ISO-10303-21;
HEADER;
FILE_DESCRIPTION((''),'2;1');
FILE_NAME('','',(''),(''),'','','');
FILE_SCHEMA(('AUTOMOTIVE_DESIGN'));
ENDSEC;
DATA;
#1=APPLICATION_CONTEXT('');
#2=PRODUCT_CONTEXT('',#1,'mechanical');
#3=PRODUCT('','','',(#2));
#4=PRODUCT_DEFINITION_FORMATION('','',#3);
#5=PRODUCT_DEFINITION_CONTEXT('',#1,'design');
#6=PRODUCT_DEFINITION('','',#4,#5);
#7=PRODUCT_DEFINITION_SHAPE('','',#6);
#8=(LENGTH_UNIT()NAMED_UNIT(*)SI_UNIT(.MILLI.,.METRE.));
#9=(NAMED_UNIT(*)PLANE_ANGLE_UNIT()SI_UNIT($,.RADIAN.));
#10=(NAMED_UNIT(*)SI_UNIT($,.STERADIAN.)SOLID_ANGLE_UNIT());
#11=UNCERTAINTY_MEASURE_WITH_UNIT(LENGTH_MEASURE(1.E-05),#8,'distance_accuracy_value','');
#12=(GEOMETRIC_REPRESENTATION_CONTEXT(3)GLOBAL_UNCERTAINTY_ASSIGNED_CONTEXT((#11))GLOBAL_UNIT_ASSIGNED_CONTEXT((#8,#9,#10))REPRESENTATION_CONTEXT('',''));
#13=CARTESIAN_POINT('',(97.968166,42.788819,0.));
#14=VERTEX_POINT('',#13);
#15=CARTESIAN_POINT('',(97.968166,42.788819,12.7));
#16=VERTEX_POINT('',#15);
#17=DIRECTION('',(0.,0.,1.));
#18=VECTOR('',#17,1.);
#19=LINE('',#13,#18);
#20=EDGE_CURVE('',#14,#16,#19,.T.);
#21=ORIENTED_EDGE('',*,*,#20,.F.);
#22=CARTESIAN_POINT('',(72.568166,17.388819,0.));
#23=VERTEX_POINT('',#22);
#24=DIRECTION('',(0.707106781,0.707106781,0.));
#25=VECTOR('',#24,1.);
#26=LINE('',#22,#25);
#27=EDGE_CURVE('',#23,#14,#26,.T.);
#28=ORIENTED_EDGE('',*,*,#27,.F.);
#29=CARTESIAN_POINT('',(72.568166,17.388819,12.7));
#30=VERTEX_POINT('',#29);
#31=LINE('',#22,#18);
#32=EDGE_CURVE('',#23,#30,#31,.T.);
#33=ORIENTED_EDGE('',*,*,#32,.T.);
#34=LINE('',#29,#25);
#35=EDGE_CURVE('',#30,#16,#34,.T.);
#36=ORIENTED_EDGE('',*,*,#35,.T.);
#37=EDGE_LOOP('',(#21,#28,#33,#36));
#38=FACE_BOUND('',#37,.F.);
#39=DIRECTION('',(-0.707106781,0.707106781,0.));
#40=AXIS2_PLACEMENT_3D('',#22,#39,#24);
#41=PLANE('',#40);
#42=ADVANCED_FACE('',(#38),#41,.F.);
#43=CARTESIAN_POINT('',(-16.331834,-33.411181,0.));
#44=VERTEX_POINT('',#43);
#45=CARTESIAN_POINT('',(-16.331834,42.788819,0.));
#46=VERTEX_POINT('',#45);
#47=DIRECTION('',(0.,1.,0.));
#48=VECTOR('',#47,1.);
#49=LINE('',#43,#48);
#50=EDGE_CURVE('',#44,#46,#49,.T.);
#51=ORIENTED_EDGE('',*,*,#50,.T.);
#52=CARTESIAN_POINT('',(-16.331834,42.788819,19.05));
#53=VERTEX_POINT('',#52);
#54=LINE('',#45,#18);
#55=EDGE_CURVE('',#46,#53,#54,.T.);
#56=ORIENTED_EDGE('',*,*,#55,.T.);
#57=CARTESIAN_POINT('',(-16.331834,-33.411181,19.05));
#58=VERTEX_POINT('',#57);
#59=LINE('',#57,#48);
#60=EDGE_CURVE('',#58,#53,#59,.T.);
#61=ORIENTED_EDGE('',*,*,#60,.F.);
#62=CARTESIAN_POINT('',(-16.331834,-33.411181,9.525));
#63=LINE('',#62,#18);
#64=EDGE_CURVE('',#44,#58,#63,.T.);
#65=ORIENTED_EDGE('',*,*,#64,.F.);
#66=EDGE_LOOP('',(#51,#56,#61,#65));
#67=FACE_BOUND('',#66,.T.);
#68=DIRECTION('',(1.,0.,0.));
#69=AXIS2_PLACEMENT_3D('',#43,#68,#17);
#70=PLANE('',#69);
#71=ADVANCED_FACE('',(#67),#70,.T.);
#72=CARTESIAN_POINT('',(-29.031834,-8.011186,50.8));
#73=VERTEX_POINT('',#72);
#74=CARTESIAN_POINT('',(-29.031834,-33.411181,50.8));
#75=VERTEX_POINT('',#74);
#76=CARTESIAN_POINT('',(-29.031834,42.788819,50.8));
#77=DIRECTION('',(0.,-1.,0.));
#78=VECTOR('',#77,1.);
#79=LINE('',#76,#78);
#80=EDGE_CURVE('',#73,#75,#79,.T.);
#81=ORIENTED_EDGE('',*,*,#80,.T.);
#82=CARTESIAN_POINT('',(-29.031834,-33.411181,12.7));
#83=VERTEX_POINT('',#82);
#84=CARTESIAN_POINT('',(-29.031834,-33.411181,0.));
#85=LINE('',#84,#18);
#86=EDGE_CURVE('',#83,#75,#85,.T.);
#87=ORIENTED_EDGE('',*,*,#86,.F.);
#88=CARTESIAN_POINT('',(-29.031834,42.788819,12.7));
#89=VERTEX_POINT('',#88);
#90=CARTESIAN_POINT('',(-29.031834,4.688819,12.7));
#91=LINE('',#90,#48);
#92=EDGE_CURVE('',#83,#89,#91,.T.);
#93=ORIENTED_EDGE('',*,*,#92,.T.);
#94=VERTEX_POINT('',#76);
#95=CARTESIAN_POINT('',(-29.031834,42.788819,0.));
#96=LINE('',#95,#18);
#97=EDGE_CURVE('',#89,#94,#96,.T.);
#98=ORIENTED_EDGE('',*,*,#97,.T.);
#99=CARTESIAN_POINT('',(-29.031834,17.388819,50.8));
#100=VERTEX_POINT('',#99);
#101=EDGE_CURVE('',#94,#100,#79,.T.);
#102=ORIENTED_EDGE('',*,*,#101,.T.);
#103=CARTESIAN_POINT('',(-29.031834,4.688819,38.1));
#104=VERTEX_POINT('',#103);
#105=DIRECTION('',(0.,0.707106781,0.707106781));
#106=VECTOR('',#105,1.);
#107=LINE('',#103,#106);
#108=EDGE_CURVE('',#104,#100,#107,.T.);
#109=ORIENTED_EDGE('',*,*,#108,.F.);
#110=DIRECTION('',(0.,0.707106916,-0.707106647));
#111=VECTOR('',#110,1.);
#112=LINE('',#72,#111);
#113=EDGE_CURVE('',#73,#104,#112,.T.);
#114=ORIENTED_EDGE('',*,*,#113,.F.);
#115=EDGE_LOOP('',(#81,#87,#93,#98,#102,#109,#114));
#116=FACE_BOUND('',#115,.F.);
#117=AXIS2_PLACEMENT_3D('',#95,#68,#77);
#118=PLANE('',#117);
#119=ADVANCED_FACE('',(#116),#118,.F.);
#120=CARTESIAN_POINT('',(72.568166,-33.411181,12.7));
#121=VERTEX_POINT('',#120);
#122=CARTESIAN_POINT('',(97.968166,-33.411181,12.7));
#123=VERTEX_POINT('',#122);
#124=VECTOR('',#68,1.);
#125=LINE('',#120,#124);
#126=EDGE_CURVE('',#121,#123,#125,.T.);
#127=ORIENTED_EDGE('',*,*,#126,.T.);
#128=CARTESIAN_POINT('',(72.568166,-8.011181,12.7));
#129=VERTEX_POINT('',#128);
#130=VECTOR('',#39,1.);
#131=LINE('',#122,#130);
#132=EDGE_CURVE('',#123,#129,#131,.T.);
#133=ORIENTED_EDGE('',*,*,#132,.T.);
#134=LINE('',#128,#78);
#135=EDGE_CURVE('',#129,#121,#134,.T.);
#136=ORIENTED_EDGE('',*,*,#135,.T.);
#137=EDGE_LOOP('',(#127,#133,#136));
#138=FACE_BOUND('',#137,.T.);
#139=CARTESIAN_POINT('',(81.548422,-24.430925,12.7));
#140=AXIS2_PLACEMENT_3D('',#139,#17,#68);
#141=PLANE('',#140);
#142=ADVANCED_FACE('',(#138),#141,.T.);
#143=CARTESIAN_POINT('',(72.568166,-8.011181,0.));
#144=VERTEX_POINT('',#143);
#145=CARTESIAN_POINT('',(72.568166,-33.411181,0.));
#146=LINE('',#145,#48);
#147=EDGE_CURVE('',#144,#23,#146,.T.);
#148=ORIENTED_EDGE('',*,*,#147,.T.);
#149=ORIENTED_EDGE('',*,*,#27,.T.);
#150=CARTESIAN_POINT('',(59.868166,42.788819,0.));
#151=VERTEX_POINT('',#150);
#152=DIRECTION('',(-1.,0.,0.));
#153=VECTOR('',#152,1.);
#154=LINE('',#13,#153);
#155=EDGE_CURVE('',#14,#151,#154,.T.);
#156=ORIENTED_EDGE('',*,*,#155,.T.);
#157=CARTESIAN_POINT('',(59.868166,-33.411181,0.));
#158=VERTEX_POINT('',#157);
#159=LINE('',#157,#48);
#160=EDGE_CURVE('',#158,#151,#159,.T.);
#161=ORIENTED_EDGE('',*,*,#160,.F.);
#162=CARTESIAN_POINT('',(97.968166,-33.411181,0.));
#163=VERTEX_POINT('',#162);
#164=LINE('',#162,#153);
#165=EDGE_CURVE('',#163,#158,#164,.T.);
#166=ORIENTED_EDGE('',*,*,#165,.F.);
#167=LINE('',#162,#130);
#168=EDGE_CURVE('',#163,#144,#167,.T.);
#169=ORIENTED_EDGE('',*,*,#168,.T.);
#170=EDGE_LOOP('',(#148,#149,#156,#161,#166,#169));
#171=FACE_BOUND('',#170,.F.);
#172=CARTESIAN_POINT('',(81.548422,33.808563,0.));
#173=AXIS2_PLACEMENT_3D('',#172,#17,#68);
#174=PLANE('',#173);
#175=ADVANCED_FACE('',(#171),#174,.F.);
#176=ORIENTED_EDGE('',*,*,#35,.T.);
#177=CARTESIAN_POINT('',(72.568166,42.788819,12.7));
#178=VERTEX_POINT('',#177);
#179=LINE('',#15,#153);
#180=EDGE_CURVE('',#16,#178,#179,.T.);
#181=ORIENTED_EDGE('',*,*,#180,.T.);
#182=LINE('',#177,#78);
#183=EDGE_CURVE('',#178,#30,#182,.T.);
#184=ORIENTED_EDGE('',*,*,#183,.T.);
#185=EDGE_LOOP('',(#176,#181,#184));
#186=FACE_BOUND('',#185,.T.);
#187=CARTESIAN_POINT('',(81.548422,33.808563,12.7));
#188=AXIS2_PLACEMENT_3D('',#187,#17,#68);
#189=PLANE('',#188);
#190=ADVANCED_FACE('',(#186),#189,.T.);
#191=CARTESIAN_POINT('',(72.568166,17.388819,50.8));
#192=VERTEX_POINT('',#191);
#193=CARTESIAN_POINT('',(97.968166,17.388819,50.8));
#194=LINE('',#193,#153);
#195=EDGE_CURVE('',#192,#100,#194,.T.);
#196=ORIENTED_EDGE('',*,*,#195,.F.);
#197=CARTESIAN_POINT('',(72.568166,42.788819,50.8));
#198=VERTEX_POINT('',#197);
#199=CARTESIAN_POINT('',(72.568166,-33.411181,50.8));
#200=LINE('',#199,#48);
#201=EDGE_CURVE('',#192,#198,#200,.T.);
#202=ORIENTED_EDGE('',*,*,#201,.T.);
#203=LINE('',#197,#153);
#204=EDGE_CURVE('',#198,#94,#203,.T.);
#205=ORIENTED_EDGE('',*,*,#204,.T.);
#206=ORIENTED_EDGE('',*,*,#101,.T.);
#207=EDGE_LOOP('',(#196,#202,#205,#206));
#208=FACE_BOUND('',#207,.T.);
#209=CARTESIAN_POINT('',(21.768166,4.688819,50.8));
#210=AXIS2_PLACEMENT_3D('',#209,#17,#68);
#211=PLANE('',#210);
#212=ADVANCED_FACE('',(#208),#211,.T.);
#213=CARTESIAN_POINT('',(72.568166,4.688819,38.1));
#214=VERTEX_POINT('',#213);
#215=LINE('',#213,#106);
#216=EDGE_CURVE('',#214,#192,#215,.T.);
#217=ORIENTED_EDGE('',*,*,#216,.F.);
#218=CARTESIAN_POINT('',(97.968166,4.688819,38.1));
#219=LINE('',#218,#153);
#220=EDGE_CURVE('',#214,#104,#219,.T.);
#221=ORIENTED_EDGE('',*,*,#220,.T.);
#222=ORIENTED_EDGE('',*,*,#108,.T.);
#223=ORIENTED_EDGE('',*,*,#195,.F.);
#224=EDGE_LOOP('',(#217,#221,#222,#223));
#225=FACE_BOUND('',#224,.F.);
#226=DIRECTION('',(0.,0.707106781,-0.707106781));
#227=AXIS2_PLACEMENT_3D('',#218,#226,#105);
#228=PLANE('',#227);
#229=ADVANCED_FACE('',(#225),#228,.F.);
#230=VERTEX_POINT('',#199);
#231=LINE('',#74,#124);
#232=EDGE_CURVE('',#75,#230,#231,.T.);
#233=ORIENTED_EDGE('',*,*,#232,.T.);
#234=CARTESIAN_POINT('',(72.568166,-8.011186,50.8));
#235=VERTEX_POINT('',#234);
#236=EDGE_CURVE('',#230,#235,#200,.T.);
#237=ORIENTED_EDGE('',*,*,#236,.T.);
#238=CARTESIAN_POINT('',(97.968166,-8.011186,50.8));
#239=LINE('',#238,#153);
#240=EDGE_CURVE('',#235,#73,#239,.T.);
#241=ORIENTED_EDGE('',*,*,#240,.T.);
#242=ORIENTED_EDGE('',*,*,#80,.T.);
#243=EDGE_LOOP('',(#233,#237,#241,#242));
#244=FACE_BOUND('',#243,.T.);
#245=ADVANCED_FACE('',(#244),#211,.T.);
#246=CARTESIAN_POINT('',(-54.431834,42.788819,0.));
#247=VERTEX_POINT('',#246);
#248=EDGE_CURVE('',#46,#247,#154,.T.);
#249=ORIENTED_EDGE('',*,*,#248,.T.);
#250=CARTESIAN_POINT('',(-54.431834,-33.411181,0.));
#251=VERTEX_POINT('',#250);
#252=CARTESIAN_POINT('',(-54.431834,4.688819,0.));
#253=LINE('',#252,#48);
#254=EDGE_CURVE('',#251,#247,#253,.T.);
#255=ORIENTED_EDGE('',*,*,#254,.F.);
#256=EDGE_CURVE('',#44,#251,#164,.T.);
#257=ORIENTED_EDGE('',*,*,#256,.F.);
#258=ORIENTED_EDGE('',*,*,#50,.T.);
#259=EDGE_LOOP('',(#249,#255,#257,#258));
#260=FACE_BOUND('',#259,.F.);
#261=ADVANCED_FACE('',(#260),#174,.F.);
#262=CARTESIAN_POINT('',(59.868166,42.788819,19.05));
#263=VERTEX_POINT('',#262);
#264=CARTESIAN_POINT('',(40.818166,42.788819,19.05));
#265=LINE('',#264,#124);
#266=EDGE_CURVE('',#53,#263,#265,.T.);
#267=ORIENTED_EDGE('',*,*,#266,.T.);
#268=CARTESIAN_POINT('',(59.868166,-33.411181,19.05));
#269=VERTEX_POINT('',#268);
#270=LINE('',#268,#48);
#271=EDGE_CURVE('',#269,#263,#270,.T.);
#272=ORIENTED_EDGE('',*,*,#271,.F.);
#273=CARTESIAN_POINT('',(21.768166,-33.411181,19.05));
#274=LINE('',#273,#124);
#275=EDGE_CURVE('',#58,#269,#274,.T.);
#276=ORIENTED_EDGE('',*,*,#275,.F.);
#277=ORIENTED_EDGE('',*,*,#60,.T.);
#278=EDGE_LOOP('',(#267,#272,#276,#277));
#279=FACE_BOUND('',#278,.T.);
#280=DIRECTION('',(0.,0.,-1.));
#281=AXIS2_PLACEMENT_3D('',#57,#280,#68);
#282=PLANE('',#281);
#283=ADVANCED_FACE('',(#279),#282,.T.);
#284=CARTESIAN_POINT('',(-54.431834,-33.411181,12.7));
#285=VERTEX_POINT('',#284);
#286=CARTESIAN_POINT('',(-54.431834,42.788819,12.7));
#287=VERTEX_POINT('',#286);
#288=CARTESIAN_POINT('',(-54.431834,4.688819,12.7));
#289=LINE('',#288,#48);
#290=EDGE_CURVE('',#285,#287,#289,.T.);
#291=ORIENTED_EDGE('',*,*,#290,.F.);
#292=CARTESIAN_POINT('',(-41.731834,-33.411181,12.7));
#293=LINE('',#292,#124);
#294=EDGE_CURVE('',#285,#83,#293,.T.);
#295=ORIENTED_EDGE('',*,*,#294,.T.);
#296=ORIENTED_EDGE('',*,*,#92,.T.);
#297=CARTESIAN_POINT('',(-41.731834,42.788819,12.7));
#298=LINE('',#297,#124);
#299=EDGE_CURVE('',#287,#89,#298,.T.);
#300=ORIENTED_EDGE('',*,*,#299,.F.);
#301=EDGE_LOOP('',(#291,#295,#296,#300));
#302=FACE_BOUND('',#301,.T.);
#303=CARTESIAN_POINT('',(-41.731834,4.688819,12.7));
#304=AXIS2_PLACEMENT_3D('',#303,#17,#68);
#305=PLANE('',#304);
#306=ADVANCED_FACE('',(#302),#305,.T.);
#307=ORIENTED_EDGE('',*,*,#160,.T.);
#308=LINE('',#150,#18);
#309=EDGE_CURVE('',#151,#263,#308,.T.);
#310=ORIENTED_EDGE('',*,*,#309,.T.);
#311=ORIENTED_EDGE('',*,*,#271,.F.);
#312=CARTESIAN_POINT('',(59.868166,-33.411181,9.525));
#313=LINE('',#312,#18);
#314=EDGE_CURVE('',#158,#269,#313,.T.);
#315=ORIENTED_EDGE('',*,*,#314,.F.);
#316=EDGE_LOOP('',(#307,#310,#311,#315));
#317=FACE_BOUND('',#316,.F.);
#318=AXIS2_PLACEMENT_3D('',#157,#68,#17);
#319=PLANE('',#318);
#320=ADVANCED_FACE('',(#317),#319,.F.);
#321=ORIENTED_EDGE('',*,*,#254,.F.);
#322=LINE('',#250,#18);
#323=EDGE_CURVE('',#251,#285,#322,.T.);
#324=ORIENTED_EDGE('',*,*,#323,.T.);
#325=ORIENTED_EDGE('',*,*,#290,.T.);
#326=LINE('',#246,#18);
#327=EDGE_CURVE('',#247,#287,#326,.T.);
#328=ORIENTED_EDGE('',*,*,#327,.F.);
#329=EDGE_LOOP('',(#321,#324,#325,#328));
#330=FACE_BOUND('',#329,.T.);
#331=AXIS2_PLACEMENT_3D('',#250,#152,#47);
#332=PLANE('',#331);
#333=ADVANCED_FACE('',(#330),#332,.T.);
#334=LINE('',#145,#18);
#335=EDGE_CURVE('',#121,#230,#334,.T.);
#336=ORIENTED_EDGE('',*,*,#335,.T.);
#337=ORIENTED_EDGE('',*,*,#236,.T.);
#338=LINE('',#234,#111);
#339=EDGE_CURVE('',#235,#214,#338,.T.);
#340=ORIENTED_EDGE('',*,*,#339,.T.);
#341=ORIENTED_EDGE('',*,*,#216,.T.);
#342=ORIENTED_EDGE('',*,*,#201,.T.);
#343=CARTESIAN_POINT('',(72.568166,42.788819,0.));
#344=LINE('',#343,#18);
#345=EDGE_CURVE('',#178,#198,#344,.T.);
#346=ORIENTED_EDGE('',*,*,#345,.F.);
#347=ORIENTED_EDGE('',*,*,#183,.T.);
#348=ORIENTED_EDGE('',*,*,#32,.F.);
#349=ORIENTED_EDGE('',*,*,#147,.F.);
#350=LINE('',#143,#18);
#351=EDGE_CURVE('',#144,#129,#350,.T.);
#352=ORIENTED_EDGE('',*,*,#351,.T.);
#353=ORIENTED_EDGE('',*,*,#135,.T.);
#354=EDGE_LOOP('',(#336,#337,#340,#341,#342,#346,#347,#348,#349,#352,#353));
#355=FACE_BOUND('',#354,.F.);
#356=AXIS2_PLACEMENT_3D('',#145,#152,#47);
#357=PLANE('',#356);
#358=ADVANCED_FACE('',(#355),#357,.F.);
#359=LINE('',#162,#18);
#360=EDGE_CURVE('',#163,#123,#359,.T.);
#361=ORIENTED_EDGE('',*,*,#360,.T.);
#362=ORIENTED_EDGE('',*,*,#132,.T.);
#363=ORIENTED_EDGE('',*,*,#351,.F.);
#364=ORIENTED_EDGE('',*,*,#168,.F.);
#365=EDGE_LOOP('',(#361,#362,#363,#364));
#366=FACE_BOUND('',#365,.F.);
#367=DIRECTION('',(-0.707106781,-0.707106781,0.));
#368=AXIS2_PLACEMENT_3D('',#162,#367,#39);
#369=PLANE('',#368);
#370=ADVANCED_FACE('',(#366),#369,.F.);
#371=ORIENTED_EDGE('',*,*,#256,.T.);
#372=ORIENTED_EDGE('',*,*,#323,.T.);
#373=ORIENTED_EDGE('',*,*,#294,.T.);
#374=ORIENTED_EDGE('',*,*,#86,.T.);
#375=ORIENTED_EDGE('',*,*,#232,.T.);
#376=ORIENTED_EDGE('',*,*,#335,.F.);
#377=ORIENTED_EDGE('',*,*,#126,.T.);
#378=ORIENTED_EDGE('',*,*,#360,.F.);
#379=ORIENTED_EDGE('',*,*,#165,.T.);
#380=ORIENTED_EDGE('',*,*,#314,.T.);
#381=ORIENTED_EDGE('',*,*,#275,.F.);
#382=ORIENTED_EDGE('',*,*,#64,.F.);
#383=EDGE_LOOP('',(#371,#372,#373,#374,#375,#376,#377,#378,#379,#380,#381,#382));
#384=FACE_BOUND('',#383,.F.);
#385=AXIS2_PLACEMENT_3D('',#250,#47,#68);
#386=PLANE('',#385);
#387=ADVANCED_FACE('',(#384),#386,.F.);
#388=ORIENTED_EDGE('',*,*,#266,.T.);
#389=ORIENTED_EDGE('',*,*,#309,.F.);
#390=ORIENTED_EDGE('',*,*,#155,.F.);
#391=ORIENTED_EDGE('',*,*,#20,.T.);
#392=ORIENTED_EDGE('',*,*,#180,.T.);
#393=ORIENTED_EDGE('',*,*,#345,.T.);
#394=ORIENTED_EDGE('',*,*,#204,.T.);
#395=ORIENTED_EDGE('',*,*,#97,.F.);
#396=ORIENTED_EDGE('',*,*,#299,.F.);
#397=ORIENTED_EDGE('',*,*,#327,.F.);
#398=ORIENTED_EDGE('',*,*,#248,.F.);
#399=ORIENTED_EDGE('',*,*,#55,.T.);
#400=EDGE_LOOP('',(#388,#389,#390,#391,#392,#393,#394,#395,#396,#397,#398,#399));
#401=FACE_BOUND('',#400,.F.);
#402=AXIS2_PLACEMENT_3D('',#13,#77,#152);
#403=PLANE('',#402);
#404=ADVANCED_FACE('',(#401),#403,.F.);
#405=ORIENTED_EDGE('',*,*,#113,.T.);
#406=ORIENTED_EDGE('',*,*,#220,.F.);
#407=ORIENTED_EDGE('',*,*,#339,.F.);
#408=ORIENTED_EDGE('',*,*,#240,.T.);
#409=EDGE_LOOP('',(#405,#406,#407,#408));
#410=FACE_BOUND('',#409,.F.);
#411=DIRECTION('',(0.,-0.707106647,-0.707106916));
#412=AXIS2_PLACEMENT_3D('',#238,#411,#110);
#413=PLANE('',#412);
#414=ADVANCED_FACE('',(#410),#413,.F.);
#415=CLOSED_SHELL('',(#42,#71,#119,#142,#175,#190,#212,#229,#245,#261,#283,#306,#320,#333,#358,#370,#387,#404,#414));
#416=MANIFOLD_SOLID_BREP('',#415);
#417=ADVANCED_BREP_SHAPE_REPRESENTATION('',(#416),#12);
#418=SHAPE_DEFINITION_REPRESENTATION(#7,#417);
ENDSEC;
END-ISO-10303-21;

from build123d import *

# Parameters (mm, degrees)
F1_DEPTH = 50.8
F0_W     = 25.4
F0_H     = 76.2
F2_DEPTH = 12.7
F3_DEPTH = 12.7
F5_DEPTH = 25.4
F6_DEPTH = 127
F7_W     = 76.2
F7_H     = 19.05
F8_DEPTH = 101.6


with BuildPart() as f1:
    # F0 (on Top) → F1 (new body)
    with BuildSketch(Plane.XY):
        Polygon((72.5681655884, 42.7888188445), (-29.0318344116, 42.7888188445), (-29.0318344116, -33.4111811555), (72.5681655884, -33.4111811555), (72.5681655884, -8.0111811555), (72.5681655884, 17.3888188445), align=None)
    extrude(amount=F1_DEPTH)

    # F0 (on Top) → F2 (join)
    with BuildSketch(Plane.XY):
        with Locations((-41.7318344116, 4.6888188445)):
            Rectangle(F0_W, F0_H)
    extrude(amount=F2_DEPTH)

    # F0 (on Top) → F3 (join)
    with BuildSketch(Plane.XY):
        Polygon((97.9681655884, 42.7888188445), (72.5681655884, 42.7888188445), (72.5681655884, 17.3888188445), align=None)
        Polygon((72.5681655884, -8.0111811555), (72.5681655884, -33.4111811555), (97.9681655884, -33.4111811555), align=None)
    extrude(amount=F3_DEPTH)

    # F4 (on face) → F5 (join)
    with BuildSketch(Plane.YZ.offset(72.5681655884)):
        Polygon((-8.0111859904, 50.8), (4.6888188445, 38.1), (17.3888188445, 50.8), align=None)
    extrude(amount=F5_DEPTH)

    # F6 (cut): a face of the model
    f6_faces = [f1.faces().sort_by_distance(p)[0] for p in [
        (97.9681655884, 4.6888172329, 46.5666666667),
    ]]
    extrude(f6_faces, amount=-F6_DEPTH, mode=Mode.SUBTRACT)

    # F7 (on face) → F8 (cut)
    with BuildSketch(Plane.XZ.offset(33.4111811555)):
        with Locations((21.7681655884, 9.525)):
            Rectangle(F7_W, F7_H)
    extrude(amount=-F8_DEPTH, mode=Mode.SUBTRACT)


solid = f1.part
